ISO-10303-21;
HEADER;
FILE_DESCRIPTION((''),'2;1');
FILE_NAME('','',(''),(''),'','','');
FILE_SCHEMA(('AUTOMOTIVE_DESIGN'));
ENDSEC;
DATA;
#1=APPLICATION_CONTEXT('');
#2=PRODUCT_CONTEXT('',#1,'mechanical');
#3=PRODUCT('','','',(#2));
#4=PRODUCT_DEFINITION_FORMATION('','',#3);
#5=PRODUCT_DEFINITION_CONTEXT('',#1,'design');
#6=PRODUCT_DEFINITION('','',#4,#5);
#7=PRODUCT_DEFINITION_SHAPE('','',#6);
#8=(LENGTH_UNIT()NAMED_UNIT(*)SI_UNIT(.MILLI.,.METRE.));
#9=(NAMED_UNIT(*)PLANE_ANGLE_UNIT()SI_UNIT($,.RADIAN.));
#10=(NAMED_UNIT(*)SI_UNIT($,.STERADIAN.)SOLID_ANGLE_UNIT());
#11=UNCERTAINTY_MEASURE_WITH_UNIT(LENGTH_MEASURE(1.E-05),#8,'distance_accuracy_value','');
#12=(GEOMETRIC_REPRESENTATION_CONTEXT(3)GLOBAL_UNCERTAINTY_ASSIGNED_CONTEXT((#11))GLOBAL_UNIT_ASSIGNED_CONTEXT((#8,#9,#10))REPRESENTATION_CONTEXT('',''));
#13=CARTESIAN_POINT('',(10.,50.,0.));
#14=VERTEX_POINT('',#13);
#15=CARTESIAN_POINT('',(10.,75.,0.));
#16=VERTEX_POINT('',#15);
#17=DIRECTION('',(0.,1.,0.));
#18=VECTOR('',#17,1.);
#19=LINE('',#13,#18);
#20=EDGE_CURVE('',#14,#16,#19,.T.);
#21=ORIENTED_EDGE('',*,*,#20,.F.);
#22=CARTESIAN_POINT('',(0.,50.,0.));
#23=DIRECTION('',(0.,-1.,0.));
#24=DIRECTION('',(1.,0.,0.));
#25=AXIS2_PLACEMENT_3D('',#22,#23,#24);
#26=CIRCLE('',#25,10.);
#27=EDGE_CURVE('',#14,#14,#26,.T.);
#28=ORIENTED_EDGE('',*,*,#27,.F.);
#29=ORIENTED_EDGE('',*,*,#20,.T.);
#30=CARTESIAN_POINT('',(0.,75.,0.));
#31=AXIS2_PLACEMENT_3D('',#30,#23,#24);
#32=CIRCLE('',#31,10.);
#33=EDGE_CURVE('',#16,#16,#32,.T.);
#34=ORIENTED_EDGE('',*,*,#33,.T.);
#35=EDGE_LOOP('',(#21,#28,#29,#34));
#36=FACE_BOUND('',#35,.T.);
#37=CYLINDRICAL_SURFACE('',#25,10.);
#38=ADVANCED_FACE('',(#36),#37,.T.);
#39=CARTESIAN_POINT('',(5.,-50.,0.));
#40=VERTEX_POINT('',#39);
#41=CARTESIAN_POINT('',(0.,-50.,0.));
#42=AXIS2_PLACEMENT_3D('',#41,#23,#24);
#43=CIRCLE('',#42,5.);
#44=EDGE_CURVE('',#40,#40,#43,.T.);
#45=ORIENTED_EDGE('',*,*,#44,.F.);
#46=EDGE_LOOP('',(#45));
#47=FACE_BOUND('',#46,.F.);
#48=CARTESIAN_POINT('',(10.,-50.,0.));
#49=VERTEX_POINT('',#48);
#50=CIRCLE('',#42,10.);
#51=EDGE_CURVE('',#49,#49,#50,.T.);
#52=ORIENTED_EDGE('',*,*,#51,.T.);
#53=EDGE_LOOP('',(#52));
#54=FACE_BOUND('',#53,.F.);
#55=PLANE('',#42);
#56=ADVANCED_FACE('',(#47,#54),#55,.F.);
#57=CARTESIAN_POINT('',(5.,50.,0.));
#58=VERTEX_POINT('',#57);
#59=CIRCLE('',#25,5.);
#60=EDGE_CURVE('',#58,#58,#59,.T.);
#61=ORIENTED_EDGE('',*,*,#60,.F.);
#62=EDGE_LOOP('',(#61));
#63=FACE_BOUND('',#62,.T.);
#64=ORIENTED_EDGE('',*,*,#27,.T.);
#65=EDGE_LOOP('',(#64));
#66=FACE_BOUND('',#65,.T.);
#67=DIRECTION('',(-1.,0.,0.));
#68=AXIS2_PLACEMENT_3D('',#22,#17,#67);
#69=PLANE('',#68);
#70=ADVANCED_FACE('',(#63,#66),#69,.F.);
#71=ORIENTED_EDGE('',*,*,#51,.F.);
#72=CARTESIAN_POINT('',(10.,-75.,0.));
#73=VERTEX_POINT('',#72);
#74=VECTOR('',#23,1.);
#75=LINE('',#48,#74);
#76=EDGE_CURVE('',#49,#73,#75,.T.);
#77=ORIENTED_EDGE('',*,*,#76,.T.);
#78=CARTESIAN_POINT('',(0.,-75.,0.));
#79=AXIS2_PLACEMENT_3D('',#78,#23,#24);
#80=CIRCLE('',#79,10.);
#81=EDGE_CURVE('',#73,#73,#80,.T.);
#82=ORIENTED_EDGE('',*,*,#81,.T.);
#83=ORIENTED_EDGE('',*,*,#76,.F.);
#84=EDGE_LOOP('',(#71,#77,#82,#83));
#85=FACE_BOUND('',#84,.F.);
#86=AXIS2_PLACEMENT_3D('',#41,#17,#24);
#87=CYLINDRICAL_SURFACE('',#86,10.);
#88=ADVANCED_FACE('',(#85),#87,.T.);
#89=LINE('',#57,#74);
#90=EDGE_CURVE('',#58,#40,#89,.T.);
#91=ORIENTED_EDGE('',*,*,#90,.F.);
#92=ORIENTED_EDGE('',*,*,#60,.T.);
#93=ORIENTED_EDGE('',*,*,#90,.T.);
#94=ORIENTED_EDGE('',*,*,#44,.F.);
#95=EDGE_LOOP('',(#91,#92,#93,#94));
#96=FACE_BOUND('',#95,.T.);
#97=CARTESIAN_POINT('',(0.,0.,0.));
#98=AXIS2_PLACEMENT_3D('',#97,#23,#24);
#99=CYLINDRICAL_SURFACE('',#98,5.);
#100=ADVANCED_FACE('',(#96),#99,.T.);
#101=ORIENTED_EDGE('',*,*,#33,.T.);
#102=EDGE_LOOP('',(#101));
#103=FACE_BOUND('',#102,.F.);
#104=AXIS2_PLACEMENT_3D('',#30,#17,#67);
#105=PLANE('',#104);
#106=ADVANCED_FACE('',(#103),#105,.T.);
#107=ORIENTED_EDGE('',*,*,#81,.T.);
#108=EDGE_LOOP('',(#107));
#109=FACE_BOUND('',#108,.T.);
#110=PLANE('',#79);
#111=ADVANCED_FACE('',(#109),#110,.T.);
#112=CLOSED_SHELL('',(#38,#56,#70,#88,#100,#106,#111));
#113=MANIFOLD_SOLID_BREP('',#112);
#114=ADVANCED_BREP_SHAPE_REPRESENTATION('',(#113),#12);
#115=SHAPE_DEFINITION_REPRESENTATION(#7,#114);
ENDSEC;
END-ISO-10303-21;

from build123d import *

# Parameters (mm, degrees)
F0_R          = 5
F1_DEPTH      = 50
F1_DEPTH_BACK = 50
F2_R          = 10
F3_DEPTH      = 25


# Not quite as in the source:
# - a pattern or mirror of a feature is missing from the dataset's text; its kind, count and spacing are read off the source's solid


with BuildPart() as f1:
    # F0 (on Front) → F1 (new body, two sides)
    with BuildSketch(Plane.XZ) as f1_sk:
        Circle(F0_R)
    extrude(amount=F1_DEPTH)
    extrude(f1_sk.sketch, amount=-F1_DEPTH_BACK)

    # F2 (on face) → F3 (join)
    with BuildSketch(Plane.XZ.offset(50)):
        Circle(F2_R)
    f3 = extrude(amount=F3_DEPTH)

    # F3_copies: F3 across plane
    add(f3.mirror(Plane.ZX))


solid = f1.part
